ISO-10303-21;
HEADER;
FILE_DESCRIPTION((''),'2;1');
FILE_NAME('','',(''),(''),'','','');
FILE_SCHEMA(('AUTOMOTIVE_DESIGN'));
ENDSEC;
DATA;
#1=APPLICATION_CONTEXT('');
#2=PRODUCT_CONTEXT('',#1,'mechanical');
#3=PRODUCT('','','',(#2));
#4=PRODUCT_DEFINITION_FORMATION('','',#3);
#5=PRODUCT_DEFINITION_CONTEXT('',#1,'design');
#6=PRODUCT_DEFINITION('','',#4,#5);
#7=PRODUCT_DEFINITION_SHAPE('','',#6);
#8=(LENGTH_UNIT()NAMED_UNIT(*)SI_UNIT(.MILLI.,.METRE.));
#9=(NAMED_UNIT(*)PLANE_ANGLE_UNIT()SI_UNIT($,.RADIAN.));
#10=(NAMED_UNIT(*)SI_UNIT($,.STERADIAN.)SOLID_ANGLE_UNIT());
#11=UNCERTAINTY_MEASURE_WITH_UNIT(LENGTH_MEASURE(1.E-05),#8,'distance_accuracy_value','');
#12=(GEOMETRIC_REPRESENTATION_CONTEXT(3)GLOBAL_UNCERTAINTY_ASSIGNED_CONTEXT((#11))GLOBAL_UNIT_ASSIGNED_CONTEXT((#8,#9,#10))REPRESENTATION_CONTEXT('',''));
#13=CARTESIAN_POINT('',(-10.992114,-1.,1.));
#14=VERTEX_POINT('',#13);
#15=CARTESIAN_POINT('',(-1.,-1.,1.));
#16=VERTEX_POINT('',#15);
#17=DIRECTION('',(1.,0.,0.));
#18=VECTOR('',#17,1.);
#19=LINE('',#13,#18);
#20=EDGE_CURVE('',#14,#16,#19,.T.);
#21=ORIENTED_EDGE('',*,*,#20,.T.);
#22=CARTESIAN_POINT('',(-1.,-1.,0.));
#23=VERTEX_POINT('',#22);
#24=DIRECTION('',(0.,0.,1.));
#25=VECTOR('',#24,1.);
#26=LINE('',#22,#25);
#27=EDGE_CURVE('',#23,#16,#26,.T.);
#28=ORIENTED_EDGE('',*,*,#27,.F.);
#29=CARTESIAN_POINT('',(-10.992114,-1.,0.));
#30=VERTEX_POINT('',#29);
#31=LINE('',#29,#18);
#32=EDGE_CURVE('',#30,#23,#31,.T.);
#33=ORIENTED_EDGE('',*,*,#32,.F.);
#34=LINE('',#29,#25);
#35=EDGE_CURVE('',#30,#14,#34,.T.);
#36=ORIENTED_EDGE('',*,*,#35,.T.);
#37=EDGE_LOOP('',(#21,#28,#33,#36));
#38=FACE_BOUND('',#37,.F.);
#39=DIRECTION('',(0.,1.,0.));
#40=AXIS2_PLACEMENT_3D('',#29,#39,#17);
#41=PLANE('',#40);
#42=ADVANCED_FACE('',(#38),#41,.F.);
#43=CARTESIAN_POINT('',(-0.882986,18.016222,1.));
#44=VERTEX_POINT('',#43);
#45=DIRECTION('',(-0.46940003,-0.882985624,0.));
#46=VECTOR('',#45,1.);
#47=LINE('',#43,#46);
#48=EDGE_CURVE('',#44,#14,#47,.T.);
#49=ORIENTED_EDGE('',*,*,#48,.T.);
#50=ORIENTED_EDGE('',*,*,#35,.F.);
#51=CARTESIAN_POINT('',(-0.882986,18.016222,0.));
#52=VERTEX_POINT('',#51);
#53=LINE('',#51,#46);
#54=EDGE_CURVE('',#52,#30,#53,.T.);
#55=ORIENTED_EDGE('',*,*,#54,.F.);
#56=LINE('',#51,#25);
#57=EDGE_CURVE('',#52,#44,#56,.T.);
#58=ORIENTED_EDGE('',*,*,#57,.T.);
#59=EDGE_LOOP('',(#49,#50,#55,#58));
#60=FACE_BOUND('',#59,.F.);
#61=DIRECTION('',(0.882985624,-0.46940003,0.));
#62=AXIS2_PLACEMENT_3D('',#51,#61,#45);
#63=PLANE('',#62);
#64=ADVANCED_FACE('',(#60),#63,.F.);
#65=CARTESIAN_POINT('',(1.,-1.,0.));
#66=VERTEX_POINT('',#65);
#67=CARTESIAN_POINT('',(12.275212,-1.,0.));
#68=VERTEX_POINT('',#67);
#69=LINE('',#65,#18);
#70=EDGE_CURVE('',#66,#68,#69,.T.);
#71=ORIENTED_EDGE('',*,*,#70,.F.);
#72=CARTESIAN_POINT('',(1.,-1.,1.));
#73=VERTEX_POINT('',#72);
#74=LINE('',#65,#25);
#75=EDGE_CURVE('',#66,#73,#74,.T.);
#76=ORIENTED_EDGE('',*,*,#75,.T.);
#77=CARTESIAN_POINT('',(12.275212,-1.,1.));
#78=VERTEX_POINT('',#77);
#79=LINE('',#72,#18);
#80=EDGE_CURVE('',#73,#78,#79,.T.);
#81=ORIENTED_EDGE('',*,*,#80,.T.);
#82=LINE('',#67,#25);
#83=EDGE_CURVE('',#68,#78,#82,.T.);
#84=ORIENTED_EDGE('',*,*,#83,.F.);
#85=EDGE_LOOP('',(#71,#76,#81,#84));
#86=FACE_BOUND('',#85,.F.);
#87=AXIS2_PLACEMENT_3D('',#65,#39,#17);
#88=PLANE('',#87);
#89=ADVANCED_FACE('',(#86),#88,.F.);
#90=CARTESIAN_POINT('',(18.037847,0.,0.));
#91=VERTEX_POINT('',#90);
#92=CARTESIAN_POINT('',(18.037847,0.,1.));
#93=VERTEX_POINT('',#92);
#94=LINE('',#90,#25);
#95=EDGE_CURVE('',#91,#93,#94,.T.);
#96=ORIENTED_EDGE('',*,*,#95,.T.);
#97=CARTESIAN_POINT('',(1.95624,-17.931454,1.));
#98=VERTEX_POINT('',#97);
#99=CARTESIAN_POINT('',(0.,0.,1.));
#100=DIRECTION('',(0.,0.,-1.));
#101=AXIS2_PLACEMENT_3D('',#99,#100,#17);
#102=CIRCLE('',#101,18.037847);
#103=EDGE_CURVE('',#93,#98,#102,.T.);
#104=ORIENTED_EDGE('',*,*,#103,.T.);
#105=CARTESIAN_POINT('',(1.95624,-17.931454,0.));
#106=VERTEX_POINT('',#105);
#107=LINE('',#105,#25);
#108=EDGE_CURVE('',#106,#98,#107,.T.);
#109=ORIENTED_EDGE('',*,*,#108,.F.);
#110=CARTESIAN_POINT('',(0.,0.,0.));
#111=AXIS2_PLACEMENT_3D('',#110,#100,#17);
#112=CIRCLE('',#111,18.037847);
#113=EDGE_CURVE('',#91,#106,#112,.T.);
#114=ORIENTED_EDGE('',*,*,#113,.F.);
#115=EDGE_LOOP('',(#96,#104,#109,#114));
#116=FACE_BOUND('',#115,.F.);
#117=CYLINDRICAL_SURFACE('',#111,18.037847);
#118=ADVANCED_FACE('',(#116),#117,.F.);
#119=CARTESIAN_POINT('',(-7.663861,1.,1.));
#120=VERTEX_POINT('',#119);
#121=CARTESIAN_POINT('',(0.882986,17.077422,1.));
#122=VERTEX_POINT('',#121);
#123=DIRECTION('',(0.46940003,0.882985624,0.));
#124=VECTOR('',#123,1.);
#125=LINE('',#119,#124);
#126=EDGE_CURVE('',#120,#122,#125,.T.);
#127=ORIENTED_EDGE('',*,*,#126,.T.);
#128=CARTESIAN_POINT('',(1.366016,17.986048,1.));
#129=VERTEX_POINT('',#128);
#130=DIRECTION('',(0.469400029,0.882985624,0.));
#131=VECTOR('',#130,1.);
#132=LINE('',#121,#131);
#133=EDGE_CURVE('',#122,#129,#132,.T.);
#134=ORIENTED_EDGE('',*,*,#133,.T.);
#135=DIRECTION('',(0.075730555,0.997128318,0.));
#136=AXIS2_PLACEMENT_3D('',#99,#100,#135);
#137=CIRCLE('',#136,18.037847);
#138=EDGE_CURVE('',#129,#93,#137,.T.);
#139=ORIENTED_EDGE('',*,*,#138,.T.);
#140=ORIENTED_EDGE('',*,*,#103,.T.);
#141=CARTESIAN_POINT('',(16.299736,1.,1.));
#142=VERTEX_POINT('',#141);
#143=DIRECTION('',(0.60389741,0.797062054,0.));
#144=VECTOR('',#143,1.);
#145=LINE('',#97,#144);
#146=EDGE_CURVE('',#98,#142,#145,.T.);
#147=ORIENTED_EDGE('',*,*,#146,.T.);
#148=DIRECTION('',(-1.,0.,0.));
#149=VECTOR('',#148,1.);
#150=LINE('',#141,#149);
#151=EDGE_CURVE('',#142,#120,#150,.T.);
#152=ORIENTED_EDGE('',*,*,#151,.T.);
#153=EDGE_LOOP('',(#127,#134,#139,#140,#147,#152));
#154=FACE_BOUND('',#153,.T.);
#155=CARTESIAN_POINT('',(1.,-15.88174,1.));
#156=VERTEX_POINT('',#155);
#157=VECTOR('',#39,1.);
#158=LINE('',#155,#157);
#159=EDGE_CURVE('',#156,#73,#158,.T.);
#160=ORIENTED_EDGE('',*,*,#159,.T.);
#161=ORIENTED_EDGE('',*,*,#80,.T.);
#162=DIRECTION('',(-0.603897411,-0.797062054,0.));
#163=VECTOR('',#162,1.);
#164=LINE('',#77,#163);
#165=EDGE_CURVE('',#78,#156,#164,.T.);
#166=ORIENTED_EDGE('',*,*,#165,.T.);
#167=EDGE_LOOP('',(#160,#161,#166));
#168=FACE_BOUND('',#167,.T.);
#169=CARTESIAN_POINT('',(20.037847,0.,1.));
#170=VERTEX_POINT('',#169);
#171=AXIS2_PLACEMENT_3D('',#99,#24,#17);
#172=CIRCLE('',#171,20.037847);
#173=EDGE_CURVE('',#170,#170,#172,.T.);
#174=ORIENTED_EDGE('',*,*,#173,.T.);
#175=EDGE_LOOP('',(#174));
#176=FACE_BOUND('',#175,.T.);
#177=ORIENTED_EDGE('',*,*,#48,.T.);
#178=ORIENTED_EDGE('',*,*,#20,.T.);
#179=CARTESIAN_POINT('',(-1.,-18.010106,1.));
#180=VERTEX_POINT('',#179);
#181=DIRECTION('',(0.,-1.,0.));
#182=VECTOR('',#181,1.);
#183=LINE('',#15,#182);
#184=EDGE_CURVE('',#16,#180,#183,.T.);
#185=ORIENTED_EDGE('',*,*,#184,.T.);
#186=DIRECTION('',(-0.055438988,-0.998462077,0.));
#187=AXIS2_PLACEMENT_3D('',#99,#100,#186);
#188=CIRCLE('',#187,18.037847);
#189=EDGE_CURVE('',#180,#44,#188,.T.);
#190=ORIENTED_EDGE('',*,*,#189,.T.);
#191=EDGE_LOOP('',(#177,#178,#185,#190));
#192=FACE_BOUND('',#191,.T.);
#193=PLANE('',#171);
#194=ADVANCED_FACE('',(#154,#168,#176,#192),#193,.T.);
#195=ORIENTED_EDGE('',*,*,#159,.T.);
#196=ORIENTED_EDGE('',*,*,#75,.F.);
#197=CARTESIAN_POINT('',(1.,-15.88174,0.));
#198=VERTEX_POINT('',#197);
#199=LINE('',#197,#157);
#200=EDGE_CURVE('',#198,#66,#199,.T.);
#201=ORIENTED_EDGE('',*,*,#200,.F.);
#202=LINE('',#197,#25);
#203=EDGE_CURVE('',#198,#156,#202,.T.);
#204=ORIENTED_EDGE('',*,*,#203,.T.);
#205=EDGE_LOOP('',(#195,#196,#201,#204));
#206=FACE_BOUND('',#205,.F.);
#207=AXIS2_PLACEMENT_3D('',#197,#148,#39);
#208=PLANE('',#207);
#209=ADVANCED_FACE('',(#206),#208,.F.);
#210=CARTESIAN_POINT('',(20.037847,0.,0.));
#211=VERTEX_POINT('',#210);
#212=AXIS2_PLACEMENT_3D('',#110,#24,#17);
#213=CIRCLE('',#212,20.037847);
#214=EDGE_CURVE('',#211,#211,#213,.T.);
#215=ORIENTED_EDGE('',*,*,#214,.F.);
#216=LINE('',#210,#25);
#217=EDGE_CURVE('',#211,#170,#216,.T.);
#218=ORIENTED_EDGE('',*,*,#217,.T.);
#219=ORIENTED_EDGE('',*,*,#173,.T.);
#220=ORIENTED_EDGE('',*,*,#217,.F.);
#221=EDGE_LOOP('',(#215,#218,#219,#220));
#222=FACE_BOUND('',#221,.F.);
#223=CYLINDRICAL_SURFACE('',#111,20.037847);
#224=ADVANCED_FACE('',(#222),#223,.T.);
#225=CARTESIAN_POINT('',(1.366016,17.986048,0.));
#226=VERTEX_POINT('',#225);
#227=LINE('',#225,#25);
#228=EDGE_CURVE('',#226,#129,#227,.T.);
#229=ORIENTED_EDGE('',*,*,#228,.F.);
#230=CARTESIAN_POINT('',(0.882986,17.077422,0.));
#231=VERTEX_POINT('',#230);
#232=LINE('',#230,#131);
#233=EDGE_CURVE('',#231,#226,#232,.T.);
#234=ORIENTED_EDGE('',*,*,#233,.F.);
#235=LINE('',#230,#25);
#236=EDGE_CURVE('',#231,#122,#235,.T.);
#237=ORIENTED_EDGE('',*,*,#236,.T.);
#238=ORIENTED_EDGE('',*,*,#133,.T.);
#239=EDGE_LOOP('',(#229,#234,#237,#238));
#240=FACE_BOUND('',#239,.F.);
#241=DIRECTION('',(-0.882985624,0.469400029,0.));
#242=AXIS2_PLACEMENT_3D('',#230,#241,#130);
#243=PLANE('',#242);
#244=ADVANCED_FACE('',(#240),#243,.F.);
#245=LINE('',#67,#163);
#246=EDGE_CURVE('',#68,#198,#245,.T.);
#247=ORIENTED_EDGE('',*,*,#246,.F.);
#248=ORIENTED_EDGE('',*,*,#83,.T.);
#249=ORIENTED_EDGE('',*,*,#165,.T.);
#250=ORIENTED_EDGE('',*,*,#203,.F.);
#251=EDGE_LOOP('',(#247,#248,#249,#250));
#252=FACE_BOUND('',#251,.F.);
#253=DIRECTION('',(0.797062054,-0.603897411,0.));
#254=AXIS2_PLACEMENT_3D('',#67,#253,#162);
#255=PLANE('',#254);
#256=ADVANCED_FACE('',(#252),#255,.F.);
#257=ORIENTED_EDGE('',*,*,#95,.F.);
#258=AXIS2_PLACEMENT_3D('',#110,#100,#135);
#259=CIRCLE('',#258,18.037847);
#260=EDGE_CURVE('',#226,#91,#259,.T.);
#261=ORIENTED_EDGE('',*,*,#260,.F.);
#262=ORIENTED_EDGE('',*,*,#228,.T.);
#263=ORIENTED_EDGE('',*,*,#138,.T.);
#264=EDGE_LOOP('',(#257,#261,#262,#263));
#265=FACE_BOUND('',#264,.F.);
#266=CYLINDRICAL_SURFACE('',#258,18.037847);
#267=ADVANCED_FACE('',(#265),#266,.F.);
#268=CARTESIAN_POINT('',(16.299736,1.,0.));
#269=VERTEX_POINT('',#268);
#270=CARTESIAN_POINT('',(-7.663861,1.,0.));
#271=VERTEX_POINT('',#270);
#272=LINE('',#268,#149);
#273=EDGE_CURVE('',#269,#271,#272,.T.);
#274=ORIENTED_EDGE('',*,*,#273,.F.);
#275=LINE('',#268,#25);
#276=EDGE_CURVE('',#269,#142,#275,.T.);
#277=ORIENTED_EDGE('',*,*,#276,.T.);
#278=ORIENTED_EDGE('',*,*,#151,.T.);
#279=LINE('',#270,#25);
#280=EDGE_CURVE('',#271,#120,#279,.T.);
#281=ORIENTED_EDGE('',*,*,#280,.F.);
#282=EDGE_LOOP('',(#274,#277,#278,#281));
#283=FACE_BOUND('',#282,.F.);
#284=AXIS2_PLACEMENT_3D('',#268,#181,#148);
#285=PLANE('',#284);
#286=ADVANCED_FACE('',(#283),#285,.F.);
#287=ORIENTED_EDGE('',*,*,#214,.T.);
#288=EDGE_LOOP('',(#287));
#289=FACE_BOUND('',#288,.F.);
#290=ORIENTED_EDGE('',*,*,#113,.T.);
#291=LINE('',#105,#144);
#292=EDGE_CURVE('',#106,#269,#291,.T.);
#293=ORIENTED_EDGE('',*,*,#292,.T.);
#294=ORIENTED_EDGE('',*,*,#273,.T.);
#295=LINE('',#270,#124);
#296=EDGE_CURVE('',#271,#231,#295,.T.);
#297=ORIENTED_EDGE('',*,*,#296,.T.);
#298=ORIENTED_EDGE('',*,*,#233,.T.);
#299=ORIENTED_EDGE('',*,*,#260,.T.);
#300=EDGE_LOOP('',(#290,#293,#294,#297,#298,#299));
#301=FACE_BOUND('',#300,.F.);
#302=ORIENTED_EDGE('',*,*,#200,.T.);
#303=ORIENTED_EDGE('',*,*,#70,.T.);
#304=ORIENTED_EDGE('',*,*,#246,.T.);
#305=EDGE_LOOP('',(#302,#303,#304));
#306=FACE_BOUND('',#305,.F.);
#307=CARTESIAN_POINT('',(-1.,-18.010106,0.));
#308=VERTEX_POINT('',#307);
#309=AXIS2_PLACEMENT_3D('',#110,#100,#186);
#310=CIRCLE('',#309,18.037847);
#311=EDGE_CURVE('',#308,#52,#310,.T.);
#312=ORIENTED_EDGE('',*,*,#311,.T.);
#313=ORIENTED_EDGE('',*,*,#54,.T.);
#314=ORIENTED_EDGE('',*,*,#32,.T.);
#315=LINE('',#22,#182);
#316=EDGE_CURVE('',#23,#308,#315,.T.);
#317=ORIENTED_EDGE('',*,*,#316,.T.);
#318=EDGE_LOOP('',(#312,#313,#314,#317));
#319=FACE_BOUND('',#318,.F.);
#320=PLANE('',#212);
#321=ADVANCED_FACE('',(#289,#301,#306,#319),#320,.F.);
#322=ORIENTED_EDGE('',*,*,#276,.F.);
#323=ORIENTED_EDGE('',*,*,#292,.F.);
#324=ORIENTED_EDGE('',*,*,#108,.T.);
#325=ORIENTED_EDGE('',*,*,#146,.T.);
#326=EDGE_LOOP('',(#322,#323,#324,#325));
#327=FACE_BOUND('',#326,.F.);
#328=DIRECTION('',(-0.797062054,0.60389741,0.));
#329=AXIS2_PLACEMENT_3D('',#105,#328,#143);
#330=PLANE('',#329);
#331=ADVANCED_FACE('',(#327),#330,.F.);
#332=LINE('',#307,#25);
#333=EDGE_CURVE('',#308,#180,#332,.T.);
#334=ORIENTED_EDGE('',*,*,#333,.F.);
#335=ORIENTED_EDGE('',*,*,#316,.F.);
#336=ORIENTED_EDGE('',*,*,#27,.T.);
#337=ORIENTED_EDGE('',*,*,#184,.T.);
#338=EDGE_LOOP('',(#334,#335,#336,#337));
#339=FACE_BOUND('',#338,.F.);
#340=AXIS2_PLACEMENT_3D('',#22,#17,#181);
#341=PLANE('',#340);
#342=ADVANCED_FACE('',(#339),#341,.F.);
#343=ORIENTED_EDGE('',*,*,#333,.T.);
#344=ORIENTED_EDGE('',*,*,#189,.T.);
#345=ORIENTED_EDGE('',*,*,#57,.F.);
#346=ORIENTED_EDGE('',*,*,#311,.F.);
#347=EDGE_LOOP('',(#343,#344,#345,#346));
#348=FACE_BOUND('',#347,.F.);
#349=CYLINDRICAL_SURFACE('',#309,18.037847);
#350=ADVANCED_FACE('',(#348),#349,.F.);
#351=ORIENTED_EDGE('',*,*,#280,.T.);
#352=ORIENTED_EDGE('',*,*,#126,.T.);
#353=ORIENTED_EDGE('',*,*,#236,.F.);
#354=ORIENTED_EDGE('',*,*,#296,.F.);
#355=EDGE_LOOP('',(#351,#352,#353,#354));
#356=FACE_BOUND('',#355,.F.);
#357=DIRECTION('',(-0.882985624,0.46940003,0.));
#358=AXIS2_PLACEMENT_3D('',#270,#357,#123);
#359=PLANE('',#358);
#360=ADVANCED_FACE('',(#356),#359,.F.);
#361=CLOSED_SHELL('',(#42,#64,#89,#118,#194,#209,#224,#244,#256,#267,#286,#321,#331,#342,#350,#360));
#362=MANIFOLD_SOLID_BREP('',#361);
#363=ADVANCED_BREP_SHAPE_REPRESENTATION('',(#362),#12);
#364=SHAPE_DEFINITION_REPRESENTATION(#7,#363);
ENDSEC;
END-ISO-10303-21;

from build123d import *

# Parameters (mm, degrees)
F0_R     = 20.0378472318
F1_DEPTH = 1


with BuildPart() as f1:
    # F0 (on Top) → F1 (new body)
    with BuildSketch(Plane.XY):
        Circle(F0_R)
        with BuildLine():
            ThreePointArc((-1, -18.010106406), (-18.0377520859, 0.0585870494), (-0.8829856241, 18.0162223883))
            ThreePointArc((-0.8829856241, 18.0162223883), (0.2419860556, 18.0362239813), (1.3660161897, 17.9860482743))
            ThreePointArc((1.3660161897, 17.9860482743), (13.2288307137, 12.2622172018), (18.0378472318, 0))
            ThreePointArc((18.0378472318, 0), (13.4285198006, -12.0432050851), (1.9562398361, -17.9314544435))
            ThreePointArc((1.9562398361, -17.9314544435), (0.4797344983, -18.031466595), (-1, -18.010106406))
        make_face(mode=Mode.SUBTRACT)
        with BuildLine():
            Line((0.8829856241, 17.0774223292), (-0.8829856241, 18.0162223883))
            Line((-0.8829856241, 18.0162223883), (-10.9921143656, -1))
            Line((-10.9921143656, -1), (-1, -1))
            Line((-1, -1), (-1, -18.010106406))
            ThreePointArc((-1, -18.010106406), (0.4797344983, -18.031466595), (1.9562398361, -17.9314544435))
            Line((1.9562398361, -17.9314544435), (16.2997357547, 1))
            Line((16.2997357547, 1), (-7.6638607916, 1))
            Line((-7.6638607916, 1), (0.8829856241, 17.0774223292))
        make_face()
        Polygon((1, -15.8817395568), (1, -1), (12.2752124372, -1), align=None, mode=Mode.SUBTRACT)
        with BuildLine():
            ThreePointArc((1.3660161897, 17.9860482743), (0.2419860556, 18.0362239813), (-0.8829856241, 18.0162223883))
            Line((-0.8829856241, 18.0162223883), (0.8829856241, 17.0774223292))
            Line((0.8829856241, 17.0774223292), (1.3660161897, 17.9860482743))
        make_face()
    extrude(amount=F1_DEPTH)


solid = f1.part
